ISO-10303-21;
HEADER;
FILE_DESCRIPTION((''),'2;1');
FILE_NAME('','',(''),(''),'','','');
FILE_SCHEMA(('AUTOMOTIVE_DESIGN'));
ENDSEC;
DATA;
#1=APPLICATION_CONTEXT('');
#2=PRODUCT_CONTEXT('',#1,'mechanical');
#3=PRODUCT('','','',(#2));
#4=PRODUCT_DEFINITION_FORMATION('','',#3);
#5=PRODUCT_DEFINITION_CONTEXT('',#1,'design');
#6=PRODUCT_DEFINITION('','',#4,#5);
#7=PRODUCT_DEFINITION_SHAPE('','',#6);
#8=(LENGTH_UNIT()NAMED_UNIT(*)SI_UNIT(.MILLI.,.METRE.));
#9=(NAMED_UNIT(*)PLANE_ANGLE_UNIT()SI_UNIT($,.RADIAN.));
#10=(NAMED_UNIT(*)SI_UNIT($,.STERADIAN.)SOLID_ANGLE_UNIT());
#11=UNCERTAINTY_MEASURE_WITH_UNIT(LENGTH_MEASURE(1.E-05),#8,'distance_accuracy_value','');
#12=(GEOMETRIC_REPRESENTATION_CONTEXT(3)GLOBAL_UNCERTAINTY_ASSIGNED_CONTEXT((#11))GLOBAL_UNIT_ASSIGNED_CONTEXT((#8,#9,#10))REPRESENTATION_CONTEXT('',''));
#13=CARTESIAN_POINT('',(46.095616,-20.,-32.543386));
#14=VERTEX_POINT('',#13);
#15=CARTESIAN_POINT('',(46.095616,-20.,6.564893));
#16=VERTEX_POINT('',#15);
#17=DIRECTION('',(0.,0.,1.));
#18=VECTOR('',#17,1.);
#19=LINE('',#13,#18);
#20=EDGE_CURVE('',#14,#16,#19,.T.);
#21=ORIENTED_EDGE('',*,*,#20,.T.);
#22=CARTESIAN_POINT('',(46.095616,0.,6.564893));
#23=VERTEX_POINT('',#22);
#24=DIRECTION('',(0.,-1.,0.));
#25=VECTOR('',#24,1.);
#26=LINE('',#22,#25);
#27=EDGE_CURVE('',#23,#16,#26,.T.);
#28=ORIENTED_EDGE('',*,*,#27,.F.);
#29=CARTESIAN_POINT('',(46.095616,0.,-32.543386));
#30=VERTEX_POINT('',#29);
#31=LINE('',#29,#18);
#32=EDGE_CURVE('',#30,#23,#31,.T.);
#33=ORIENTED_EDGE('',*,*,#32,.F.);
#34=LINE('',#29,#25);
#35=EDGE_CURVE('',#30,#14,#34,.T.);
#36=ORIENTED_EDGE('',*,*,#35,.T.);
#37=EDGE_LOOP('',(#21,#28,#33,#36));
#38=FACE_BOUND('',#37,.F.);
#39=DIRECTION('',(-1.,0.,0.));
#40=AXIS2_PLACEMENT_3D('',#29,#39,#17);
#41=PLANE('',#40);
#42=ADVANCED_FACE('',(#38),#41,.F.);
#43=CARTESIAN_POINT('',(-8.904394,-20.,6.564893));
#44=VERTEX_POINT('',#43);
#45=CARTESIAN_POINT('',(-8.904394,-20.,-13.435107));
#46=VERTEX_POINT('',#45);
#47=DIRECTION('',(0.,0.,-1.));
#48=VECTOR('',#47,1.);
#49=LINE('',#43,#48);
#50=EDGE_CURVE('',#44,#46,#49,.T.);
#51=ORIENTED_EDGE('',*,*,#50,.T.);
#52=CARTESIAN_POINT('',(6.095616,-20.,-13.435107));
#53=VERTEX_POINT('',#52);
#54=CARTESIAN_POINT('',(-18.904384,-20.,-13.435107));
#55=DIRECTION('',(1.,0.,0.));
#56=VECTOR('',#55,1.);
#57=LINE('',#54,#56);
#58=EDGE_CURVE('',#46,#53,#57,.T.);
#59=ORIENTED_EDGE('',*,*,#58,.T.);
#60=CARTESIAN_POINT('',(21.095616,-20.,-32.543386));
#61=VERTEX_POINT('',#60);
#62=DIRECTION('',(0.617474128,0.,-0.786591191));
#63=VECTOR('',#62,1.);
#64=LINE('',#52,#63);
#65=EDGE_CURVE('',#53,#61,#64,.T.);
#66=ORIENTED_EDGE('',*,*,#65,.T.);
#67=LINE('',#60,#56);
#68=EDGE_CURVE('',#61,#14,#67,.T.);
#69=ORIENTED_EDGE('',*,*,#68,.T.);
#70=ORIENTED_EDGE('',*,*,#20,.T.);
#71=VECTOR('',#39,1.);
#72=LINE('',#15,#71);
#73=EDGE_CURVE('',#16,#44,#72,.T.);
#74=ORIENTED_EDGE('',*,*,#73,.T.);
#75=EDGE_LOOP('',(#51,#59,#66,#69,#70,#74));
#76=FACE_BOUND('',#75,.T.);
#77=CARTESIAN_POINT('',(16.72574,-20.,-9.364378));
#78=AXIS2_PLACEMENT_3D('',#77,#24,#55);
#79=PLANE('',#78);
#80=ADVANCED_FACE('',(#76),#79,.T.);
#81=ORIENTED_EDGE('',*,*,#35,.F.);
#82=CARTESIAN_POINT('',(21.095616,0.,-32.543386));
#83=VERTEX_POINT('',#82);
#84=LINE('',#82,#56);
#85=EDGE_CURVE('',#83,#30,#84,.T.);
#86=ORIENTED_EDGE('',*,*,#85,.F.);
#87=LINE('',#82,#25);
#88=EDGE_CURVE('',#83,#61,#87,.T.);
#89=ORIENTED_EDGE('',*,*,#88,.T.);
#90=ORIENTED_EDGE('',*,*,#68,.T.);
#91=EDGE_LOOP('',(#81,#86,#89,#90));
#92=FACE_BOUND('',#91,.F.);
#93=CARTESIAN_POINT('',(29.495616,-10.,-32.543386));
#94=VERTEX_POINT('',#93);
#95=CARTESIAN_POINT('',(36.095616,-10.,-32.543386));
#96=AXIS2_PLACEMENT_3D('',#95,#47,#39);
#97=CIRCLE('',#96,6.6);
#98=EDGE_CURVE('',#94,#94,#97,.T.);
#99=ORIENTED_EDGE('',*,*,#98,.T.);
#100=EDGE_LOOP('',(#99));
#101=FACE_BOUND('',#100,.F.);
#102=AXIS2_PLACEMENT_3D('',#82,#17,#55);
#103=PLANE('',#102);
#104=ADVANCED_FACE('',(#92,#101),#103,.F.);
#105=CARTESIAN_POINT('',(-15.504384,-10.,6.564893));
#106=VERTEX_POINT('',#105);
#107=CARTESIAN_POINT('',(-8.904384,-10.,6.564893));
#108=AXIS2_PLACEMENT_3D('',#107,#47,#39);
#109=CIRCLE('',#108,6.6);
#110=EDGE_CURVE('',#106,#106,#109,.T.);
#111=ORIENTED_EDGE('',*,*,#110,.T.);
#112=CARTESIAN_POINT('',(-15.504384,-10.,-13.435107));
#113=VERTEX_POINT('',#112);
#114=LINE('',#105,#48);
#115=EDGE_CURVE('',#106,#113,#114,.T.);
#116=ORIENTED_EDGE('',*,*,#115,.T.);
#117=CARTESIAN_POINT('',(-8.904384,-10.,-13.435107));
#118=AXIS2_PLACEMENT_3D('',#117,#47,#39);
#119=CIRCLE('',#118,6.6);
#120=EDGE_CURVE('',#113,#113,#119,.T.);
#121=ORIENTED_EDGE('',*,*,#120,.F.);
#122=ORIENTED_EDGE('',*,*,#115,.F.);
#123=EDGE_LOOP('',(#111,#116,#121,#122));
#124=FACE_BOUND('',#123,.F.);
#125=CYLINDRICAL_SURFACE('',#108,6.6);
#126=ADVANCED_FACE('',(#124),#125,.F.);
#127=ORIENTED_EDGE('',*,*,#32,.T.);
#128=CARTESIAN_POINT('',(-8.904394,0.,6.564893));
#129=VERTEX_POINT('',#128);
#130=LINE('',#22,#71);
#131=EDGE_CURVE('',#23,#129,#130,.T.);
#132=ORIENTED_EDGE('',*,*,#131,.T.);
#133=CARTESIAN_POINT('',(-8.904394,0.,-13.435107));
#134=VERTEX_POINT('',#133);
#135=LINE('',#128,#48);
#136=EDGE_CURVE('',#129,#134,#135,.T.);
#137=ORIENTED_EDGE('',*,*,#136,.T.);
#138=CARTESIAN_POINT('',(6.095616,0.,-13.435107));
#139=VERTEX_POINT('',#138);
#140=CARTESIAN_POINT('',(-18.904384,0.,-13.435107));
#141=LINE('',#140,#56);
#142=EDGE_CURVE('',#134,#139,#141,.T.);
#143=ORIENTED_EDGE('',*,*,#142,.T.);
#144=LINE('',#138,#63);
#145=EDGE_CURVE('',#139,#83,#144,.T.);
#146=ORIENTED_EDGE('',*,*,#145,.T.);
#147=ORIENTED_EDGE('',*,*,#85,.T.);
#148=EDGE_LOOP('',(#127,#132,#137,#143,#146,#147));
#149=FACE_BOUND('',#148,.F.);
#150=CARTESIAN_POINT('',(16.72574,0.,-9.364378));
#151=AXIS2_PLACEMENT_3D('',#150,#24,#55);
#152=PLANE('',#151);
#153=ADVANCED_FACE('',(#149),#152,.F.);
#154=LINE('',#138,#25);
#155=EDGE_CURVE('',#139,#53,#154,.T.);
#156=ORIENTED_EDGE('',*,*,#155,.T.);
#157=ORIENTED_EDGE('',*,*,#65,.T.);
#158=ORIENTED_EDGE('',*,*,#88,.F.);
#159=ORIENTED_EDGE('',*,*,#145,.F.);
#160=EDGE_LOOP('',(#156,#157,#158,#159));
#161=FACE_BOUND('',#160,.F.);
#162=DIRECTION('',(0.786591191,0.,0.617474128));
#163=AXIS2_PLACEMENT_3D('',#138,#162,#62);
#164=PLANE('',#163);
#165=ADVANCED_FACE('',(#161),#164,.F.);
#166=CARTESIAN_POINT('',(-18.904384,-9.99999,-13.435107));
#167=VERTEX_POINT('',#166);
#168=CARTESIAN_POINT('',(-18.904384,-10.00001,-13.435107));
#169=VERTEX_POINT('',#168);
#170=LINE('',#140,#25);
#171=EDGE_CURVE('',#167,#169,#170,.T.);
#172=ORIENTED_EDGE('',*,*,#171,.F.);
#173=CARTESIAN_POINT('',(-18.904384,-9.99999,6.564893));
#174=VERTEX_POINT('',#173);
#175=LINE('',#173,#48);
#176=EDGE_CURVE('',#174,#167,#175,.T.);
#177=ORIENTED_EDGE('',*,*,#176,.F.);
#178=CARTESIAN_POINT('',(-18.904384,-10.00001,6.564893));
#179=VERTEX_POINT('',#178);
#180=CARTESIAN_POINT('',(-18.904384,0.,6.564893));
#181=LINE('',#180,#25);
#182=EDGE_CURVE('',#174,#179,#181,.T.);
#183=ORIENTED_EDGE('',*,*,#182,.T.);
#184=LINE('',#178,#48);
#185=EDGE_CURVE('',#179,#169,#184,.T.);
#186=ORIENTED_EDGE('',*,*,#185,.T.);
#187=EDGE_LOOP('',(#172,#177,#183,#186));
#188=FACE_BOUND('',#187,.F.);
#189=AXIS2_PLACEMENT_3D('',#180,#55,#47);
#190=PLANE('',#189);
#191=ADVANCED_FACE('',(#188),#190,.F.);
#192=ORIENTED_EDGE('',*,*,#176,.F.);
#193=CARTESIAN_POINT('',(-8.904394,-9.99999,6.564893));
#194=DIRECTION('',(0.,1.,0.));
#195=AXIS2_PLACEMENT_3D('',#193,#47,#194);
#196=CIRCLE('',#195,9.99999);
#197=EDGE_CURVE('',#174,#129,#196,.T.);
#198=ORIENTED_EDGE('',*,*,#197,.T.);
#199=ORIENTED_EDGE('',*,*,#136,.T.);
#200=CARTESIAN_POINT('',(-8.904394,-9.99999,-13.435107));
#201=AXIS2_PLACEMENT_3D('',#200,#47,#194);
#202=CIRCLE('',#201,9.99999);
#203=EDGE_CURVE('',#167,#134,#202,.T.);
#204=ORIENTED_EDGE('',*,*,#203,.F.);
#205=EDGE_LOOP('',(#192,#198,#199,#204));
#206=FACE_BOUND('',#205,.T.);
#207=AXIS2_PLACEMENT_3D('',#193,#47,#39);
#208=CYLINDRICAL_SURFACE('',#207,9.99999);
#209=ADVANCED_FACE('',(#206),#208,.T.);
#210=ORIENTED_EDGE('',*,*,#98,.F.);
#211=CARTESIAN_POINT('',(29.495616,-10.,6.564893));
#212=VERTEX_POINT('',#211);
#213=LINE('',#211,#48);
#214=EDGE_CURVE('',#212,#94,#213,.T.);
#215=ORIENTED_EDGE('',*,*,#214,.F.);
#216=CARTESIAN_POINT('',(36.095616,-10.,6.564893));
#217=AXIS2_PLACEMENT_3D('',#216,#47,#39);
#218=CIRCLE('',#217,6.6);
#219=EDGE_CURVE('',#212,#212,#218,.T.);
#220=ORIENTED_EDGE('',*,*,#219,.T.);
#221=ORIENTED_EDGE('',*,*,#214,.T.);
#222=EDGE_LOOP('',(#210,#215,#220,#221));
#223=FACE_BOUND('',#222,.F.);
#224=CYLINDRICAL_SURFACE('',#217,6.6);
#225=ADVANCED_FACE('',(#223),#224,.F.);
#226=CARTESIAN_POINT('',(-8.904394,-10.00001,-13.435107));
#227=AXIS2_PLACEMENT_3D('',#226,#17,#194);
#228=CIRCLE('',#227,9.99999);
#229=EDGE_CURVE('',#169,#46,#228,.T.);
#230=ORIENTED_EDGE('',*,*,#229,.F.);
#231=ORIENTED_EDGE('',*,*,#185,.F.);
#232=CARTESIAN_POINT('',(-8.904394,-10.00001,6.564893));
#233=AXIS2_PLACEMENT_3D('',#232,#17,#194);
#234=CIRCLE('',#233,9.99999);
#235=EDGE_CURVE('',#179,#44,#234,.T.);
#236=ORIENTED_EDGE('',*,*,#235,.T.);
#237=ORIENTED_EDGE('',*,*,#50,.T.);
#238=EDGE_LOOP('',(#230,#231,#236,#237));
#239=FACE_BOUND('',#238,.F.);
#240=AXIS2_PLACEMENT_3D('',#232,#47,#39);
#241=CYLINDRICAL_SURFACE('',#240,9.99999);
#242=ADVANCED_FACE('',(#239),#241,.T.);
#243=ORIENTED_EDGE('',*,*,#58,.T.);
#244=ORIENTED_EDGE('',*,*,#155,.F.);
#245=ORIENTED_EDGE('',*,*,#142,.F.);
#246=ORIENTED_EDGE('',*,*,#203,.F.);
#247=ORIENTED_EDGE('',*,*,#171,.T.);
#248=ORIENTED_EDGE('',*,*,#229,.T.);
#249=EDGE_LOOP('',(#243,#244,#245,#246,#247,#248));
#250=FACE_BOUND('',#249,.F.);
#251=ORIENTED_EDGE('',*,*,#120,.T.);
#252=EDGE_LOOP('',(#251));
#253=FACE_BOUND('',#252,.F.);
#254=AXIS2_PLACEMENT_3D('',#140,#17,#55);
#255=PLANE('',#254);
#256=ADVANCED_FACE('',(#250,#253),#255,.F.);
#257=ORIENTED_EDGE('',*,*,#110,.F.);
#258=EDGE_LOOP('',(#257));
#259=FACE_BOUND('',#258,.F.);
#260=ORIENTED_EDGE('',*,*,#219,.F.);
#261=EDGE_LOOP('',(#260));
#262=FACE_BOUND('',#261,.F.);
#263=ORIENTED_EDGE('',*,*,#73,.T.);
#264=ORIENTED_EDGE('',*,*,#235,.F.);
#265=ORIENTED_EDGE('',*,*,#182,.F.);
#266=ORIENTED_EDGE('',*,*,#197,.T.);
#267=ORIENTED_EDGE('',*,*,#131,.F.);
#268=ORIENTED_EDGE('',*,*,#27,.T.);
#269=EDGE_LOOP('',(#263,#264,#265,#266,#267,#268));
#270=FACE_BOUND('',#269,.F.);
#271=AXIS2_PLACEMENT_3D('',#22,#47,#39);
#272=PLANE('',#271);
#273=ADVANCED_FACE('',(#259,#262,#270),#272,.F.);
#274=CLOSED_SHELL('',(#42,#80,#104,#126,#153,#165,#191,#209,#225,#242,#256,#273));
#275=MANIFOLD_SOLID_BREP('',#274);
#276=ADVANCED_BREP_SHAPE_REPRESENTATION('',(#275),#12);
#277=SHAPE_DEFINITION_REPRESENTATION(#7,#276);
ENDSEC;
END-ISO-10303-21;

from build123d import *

# Parameters (mm, degrees)
F1_DEPTH       = 20
F2_R           = 9.99999
F4_D           = 13.2
F4_CBORE_D     = 19.25
F4_CBORE_DEPTH = 0


# Not quite as in the source:
# - a fillet or chamfer is up to 0.001 mm smaller than in the source, because OpenCascade refuses the exact size


with BuildPart() as f1:
    # F0 (on Front) → F1 (new body)
    with BuildSketch(Plane.XZ):
        Polygon((46.0956162758, 6.5648934066), (-18.9043837242, 6.5648934066), (-18.9043837242, -13.4351065934), (6.0956162758, -13.4351065934), (21.0956162758, -32.5433855138), (46.0956162758, -32.5433855138), align=None)
    extrude(amount=F1_DEPTH)

    # F2 (radius 10 in the source; OpenCascade refuses exactly that, so slightly less here)
    f2_edges = [f1.edges().sort_by_distance(p)[0] for p in [
        (-18.904384, 0, -3.435107),
        (-18.904384, -20, -3.435107),
    ]]
    fillet(f2_edges, radius=F2_R)

    # F4 (through all)
    with Locations(Plane.XY.offset(6.5648934066)):
        with Locations((-8.9043837242, -10), (36.0956162758, -10)):
            CounterBoreHole(F4_D / 2, F4_CBORE_D / 2, F4_CBORE_DEPTH)


solid = f1.part
